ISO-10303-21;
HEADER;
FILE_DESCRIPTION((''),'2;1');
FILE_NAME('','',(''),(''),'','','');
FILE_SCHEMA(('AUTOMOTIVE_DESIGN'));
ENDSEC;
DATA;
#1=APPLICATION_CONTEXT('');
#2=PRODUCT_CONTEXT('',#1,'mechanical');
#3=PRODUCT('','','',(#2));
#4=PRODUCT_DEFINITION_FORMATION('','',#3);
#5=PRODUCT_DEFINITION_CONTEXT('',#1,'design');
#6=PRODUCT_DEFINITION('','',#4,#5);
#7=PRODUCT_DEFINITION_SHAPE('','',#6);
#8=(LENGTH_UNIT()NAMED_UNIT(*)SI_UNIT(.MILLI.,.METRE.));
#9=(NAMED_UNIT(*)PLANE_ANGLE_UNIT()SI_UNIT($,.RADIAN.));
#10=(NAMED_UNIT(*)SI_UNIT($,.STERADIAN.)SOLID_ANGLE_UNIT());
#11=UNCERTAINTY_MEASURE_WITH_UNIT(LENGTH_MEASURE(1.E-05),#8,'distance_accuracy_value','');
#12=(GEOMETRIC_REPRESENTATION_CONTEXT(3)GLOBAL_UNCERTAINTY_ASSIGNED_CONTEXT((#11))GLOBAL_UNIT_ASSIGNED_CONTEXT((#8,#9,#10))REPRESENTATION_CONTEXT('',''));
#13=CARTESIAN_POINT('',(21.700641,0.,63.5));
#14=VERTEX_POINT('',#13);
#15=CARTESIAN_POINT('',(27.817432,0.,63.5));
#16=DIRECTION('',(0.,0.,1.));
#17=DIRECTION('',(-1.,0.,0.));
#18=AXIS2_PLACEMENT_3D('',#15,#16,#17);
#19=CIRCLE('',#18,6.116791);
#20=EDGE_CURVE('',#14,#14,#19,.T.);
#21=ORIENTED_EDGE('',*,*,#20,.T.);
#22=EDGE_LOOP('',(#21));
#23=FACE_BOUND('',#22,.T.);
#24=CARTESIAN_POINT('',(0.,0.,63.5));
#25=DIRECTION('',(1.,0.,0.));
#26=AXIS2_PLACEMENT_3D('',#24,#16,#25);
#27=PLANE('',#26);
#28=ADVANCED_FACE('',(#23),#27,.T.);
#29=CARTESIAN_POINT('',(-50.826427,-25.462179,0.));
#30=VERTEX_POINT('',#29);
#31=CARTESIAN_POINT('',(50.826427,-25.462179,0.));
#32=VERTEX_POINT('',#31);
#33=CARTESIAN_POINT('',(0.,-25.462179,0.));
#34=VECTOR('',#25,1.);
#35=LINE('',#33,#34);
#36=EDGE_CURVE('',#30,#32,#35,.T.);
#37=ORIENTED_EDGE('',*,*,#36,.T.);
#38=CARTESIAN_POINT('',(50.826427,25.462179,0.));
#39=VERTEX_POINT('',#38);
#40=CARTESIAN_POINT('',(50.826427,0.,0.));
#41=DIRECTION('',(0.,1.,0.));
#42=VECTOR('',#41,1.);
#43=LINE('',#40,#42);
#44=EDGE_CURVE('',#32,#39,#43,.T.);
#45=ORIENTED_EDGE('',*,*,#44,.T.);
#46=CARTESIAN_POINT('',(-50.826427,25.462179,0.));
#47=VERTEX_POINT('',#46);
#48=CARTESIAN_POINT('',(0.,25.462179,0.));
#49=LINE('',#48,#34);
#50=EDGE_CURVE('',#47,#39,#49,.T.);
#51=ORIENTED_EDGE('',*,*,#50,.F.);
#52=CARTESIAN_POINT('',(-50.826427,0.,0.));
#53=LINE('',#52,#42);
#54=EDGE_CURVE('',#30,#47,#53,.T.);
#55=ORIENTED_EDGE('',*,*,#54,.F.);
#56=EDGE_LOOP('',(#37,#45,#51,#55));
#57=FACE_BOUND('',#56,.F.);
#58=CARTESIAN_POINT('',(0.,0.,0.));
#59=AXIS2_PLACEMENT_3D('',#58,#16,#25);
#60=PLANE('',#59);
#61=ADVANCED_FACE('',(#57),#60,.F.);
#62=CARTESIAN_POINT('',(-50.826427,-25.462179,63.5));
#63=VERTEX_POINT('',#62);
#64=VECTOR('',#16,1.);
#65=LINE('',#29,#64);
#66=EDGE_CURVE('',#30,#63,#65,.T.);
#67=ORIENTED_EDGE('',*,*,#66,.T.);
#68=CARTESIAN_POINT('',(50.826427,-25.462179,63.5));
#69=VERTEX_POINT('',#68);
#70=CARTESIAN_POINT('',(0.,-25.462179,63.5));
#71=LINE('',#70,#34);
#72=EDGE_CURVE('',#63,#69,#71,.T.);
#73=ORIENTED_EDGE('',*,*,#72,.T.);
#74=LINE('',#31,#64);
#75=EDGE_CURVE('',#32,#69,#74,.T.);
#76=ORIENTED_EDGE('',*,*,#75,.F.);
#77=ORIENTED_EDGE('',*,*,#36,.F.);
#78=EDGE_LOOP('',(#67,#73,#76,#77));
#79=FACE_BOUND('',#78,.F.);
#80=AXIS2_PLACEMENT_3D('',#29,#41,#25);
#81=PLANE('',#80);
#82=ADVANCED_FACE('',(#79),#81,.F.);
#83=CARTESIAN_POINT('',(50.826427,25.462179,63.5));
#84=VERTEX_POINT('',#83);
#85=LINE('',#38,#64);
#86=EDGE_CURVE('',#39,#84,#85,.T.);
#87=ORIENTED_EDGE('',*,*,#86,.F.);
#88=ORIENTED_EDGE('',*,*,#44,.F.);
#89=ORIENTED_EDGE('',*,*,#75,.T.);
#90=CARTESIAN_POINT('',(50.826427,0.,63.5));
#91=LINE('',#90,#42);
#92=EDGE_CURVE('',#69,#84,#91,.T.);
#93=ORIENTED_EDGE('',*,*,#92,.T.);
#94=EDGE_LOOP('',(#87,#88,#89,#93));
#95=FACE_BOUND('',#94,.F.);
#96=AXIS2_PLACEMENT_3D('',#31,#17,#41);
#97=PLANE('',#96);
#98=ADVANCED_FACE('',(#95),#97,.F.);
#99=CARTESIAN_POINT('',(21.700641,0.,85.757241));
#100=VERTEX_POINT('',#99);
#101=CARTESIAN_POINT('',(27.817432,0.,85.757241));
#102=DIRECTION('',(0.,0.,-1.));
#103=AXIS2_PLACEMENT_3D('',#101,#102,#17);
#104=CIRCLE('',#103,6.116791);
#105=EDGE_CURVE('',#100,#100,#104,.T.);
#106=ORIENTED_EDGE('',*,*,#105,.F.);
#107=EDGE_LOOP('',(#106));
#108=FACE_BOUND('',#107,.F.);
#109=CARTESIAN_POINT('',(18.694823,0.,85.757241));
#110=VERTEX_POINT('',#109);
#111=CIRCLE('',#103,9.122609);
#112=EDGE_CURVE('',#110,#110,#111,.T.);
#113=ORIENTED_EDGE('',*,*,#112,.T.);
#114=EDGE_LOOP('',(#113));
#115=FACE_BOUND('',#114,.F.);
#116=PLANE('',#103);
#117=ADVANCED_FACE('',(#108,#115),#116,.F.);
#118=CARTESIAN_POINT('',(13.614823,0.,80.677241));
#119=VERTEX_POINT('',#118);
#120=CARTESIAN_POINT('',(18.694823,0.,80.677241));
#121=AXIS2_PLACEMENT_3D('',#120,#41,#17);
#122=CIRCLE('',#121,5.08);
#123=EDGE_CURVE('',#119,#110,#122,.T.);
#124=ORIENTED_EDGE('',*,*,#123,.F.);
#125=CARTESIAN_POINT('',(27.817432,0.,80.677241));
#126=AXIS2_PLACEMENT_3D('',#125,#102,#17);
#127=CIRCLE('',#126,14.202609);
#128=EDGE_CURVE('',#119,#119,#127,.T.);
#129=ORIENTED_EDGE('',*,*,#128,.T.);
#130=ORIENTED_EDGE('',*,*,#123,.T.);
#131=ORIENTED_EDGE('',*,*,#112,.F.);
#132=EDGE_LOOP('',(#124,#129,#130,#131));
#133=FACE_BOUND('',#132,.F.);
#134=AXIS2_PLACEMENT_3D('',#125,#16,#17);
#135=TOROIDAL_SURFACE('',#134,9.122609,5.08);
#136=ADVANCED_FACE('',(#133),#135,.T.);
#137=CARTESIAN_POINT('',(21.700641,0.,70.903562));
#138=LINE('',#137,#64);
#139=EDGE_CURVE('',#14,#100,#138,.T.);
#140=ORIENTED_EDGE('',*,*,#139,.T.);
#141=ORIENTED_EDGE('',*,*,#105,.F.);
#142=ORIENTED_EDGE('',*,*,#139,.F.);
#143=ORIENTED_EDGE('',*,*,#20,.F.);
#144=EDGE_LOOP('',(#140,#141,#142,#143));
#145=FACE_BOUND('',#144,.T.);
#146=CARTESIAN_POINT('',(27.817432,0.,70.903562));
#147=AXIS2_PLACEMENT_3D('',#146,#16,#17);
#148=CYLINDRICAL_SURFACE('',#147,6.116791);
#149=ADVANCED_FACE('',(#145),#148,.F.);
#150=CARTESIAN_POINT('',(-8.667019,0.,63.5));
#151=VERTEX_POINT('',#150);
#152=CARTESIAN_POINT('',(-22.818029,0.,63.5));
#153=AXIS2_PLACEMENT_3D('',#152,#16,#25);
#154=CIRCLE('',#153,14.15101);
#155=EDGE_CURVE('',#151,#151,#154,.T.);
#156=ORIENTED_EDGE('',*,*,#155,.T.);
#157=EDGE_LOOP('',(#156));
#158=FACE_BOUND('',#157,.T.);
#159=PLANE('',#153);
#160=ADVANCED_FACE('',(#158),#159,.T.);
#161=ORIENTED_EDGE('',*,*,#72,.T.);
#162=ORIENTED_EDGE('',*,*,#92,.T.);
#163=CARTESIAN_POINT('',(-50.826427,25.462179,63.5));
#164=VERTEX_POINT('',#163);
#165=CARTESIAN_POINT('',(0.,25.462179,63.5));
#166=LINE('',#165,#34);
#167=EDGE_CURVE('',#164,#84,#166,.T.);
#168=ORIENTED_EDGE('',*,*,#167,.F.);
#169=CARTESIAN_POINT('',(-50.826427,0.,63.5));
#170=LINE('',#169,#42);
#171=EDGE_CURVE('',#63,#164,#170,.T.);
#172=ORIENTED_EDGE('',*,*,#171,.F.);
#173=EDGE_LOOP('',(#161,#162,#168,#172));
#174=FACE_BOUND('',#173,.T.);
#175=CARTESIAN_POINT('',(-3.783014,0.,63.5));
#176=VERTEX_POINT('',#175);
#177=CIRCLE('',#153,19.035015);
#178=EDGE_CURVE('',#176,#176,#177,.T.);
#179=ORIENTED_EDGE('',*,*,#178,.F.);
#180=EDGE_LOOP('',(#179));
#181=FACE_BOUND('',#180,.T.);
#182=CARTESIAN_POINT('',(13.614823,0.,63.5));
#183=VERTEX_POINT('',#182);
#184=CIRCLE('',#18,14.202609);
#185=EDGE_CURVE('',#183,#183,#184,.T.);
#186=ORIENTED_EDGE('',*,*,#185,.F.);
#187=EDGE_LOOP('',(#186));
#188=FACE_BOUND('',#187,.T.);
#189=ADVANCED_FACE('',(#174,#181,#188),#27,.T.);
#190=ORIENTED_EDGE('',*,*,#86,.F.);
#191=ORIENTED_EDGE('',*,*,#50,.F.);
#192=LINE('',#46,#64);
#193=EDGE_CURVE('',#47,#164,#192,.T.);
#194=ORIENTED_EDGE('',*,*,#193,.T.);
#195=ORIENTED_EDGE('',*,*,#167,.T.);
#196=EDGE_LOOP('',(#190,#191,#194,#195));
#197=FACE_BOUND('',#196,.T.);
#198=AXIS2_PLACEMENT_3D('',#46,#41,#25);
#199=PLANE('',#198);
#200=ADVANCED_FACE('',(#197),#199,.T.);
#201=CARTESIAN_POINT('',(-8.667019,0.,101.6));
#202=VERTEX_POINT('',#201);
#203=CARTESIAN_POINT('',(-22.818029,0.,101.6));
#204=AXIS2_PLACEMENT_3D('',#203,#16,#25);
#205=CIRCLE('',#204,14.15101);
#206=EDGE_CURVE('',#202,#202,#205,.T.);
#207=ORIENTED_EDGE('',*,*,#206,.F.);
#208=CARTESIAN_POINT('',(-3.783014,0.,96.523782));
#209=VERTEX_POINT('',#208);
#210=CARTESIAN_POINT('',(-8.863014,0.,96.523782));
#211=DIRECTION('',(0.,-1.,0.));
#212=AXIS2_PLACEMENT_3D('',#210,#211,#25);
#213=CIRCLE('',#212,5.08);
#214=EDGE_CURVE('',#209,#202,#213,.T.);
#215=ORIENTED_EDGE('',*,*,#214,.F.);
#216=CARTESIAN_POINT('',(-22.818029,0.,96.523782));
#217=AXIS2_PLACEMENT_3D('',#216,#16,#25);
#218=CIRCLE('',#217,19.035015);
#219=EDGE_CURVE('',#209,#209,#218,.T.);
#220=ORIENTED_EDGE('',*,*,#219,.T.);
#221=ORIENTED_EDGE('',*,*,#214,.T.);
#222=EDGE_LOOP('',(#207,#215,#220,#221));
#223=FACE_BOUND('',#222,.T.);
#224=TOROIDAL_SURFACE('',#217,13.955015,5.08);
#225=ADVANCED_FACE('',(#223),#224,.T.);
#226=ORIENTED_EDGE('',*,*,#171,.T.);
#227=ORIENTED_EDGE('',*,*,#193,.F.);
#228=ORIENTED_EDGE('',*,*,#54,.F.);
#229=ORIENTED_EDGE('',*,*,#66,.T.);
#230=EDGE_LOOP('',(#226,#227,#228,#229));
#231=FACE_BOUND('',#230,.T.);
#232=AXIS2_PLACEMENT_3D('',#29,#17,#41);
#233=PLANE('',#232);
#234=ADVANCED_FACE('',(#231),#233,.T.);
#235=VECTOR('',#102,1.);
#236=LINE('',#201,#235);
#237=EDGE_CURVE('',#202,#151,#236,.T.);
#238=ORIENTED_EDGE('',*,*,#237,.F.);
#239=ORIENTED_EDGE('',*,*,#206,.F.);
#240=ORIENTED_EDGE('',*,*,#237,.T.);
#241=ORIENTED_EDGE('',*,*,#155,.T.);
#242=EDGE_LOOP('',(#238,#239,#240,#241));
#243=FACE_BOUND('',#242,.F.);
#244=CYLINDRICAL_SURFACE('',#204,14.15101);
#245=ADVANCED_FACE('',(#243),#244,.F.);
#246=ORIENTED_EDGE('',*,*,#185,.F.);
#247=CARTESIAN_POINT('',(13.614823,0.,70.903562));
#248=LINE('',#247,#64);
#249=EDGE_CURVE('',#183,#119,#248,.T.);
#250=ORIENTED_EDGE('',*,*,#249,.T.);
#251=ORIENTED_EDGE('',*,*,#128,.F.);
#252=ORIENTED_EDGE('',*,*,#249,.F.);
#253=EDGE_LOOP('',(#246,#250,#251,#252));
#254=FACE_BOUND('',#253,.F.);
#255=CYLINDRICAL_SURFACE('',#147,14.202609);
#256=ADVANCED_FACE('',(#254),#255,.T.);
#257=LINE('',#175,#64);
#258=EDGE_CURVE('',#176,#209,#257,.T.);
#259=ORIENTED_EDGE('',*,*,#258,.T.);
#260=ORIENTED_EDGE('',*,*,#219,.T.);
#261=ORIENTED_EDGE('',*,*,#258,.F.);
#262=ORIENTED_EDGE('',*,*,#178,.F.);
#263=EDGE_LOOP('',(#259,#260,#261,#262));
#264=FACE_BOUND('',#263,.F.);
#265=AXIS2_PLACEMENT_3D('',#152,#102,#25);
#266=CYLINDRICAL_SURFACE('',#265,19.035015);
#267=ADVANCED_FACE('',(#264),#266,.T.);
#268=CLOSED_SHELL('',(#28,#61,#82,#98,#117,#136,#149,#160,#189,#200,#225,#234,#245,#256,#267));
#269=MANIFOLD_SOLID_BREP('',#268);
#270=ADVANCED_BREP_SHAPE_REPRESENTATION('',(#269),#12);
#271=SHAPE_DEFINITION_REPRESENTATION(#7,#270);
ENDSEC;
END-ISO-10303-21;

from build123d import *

# Parameters (mm, degrees)
F0_W     = 101.6528531909
F0_H     = 50.9243570268
F1_DEPTH = 63.5
F2_R     = 19.0350145172
F3_DEPTH = 38.1
F4_R     = 14.1510097993
F5_DEPTH = 38.1
F6_W     = 8.0858180299
F6_H     = 29.7073572874


# Not quite as in the source:
# - a fillet or chamfer that OpenCascade refuses, or shapes differently, is made with other operations: its cross-section is extruded or revolved along the edge and cut away or added


with BuildPart() as f1:
    # F0 (on Top) → F1 (new body)
    with BuildSketch(Plane.XY):
        Rectangle(F0_W, F0_H)
    extrude(amount=F1_DEPTH)

    # F2 (on face) → F3 (join)
    with BuildSketch(Plane.XY.offset(63.5)):
        with Locations((-22.8180289268, 0)):
            Circle(F2_R)
    extrude(amount=F3_DEPTH)

    # F4 (on face) → F5 (cut, through all)
    with BuildSketch(Plane.XY.offset(101.6)):
        with Locations((-22.8180289268, 0)):
            Circle(F4_R)
    extrude(amount=-F5_DEPTH, mode=Mode.SUBTRACT)

    # F6 (on Front) → F7 (revolve)
    with BuildSketch(Plane.XZ):
        with Locations((17.6577321254, 70.9035620093)):
            Rectangle(F6_W, F6_H)
    revolve(axis=Axis((27.8174318373, 0, 58.8010009378), (0, 0, -1)))

    # F8: fillet of radius 5.08 on 2 edges, made by hand

    # F8_s1 → F8_t2 (revolve, cut)
    with BuildSketch(Plane.XZ):
        with BuildLine():
            ThreePointArc((-3.7830144096, 96.5237823284), (-5.2022729524, 100.0459083885), (-8.6670191276, 101.6))
            Line((-8.6670191276, 101.6), (-3.7830144096, 101.6))
            Line((-3.7830144096, 101.6), (-3.7830144096, 96.5237823284))
        make_face()
    revolve(axis=Axis((-22.8180289268, 0, 101.6), (0, 0, 1)), mode=Mode.SUBTRACT)

    # F8_s3 → F8_t4 (revolve, cut)
    with BuildSketch(Plane.XZ):
        with BuildLine():
            ThreePointArc((13.6148231104, 80.677240653), (15.102720662, 84.2693431015), (18.6948231104, 85.757240653))
            Line((18.6948231104, 85.757240653), (13.6148231104, 85.757240653))
            Line((13.6148231104, 85.757240653), (13.6148231104, 80.677240653))
        make_face()
    revolve(axis=Axis((27.8174318373, 0, 85.757240653), (0, 0, -1)), mode=Mode.SUBTRACT)


solid = f1.part
